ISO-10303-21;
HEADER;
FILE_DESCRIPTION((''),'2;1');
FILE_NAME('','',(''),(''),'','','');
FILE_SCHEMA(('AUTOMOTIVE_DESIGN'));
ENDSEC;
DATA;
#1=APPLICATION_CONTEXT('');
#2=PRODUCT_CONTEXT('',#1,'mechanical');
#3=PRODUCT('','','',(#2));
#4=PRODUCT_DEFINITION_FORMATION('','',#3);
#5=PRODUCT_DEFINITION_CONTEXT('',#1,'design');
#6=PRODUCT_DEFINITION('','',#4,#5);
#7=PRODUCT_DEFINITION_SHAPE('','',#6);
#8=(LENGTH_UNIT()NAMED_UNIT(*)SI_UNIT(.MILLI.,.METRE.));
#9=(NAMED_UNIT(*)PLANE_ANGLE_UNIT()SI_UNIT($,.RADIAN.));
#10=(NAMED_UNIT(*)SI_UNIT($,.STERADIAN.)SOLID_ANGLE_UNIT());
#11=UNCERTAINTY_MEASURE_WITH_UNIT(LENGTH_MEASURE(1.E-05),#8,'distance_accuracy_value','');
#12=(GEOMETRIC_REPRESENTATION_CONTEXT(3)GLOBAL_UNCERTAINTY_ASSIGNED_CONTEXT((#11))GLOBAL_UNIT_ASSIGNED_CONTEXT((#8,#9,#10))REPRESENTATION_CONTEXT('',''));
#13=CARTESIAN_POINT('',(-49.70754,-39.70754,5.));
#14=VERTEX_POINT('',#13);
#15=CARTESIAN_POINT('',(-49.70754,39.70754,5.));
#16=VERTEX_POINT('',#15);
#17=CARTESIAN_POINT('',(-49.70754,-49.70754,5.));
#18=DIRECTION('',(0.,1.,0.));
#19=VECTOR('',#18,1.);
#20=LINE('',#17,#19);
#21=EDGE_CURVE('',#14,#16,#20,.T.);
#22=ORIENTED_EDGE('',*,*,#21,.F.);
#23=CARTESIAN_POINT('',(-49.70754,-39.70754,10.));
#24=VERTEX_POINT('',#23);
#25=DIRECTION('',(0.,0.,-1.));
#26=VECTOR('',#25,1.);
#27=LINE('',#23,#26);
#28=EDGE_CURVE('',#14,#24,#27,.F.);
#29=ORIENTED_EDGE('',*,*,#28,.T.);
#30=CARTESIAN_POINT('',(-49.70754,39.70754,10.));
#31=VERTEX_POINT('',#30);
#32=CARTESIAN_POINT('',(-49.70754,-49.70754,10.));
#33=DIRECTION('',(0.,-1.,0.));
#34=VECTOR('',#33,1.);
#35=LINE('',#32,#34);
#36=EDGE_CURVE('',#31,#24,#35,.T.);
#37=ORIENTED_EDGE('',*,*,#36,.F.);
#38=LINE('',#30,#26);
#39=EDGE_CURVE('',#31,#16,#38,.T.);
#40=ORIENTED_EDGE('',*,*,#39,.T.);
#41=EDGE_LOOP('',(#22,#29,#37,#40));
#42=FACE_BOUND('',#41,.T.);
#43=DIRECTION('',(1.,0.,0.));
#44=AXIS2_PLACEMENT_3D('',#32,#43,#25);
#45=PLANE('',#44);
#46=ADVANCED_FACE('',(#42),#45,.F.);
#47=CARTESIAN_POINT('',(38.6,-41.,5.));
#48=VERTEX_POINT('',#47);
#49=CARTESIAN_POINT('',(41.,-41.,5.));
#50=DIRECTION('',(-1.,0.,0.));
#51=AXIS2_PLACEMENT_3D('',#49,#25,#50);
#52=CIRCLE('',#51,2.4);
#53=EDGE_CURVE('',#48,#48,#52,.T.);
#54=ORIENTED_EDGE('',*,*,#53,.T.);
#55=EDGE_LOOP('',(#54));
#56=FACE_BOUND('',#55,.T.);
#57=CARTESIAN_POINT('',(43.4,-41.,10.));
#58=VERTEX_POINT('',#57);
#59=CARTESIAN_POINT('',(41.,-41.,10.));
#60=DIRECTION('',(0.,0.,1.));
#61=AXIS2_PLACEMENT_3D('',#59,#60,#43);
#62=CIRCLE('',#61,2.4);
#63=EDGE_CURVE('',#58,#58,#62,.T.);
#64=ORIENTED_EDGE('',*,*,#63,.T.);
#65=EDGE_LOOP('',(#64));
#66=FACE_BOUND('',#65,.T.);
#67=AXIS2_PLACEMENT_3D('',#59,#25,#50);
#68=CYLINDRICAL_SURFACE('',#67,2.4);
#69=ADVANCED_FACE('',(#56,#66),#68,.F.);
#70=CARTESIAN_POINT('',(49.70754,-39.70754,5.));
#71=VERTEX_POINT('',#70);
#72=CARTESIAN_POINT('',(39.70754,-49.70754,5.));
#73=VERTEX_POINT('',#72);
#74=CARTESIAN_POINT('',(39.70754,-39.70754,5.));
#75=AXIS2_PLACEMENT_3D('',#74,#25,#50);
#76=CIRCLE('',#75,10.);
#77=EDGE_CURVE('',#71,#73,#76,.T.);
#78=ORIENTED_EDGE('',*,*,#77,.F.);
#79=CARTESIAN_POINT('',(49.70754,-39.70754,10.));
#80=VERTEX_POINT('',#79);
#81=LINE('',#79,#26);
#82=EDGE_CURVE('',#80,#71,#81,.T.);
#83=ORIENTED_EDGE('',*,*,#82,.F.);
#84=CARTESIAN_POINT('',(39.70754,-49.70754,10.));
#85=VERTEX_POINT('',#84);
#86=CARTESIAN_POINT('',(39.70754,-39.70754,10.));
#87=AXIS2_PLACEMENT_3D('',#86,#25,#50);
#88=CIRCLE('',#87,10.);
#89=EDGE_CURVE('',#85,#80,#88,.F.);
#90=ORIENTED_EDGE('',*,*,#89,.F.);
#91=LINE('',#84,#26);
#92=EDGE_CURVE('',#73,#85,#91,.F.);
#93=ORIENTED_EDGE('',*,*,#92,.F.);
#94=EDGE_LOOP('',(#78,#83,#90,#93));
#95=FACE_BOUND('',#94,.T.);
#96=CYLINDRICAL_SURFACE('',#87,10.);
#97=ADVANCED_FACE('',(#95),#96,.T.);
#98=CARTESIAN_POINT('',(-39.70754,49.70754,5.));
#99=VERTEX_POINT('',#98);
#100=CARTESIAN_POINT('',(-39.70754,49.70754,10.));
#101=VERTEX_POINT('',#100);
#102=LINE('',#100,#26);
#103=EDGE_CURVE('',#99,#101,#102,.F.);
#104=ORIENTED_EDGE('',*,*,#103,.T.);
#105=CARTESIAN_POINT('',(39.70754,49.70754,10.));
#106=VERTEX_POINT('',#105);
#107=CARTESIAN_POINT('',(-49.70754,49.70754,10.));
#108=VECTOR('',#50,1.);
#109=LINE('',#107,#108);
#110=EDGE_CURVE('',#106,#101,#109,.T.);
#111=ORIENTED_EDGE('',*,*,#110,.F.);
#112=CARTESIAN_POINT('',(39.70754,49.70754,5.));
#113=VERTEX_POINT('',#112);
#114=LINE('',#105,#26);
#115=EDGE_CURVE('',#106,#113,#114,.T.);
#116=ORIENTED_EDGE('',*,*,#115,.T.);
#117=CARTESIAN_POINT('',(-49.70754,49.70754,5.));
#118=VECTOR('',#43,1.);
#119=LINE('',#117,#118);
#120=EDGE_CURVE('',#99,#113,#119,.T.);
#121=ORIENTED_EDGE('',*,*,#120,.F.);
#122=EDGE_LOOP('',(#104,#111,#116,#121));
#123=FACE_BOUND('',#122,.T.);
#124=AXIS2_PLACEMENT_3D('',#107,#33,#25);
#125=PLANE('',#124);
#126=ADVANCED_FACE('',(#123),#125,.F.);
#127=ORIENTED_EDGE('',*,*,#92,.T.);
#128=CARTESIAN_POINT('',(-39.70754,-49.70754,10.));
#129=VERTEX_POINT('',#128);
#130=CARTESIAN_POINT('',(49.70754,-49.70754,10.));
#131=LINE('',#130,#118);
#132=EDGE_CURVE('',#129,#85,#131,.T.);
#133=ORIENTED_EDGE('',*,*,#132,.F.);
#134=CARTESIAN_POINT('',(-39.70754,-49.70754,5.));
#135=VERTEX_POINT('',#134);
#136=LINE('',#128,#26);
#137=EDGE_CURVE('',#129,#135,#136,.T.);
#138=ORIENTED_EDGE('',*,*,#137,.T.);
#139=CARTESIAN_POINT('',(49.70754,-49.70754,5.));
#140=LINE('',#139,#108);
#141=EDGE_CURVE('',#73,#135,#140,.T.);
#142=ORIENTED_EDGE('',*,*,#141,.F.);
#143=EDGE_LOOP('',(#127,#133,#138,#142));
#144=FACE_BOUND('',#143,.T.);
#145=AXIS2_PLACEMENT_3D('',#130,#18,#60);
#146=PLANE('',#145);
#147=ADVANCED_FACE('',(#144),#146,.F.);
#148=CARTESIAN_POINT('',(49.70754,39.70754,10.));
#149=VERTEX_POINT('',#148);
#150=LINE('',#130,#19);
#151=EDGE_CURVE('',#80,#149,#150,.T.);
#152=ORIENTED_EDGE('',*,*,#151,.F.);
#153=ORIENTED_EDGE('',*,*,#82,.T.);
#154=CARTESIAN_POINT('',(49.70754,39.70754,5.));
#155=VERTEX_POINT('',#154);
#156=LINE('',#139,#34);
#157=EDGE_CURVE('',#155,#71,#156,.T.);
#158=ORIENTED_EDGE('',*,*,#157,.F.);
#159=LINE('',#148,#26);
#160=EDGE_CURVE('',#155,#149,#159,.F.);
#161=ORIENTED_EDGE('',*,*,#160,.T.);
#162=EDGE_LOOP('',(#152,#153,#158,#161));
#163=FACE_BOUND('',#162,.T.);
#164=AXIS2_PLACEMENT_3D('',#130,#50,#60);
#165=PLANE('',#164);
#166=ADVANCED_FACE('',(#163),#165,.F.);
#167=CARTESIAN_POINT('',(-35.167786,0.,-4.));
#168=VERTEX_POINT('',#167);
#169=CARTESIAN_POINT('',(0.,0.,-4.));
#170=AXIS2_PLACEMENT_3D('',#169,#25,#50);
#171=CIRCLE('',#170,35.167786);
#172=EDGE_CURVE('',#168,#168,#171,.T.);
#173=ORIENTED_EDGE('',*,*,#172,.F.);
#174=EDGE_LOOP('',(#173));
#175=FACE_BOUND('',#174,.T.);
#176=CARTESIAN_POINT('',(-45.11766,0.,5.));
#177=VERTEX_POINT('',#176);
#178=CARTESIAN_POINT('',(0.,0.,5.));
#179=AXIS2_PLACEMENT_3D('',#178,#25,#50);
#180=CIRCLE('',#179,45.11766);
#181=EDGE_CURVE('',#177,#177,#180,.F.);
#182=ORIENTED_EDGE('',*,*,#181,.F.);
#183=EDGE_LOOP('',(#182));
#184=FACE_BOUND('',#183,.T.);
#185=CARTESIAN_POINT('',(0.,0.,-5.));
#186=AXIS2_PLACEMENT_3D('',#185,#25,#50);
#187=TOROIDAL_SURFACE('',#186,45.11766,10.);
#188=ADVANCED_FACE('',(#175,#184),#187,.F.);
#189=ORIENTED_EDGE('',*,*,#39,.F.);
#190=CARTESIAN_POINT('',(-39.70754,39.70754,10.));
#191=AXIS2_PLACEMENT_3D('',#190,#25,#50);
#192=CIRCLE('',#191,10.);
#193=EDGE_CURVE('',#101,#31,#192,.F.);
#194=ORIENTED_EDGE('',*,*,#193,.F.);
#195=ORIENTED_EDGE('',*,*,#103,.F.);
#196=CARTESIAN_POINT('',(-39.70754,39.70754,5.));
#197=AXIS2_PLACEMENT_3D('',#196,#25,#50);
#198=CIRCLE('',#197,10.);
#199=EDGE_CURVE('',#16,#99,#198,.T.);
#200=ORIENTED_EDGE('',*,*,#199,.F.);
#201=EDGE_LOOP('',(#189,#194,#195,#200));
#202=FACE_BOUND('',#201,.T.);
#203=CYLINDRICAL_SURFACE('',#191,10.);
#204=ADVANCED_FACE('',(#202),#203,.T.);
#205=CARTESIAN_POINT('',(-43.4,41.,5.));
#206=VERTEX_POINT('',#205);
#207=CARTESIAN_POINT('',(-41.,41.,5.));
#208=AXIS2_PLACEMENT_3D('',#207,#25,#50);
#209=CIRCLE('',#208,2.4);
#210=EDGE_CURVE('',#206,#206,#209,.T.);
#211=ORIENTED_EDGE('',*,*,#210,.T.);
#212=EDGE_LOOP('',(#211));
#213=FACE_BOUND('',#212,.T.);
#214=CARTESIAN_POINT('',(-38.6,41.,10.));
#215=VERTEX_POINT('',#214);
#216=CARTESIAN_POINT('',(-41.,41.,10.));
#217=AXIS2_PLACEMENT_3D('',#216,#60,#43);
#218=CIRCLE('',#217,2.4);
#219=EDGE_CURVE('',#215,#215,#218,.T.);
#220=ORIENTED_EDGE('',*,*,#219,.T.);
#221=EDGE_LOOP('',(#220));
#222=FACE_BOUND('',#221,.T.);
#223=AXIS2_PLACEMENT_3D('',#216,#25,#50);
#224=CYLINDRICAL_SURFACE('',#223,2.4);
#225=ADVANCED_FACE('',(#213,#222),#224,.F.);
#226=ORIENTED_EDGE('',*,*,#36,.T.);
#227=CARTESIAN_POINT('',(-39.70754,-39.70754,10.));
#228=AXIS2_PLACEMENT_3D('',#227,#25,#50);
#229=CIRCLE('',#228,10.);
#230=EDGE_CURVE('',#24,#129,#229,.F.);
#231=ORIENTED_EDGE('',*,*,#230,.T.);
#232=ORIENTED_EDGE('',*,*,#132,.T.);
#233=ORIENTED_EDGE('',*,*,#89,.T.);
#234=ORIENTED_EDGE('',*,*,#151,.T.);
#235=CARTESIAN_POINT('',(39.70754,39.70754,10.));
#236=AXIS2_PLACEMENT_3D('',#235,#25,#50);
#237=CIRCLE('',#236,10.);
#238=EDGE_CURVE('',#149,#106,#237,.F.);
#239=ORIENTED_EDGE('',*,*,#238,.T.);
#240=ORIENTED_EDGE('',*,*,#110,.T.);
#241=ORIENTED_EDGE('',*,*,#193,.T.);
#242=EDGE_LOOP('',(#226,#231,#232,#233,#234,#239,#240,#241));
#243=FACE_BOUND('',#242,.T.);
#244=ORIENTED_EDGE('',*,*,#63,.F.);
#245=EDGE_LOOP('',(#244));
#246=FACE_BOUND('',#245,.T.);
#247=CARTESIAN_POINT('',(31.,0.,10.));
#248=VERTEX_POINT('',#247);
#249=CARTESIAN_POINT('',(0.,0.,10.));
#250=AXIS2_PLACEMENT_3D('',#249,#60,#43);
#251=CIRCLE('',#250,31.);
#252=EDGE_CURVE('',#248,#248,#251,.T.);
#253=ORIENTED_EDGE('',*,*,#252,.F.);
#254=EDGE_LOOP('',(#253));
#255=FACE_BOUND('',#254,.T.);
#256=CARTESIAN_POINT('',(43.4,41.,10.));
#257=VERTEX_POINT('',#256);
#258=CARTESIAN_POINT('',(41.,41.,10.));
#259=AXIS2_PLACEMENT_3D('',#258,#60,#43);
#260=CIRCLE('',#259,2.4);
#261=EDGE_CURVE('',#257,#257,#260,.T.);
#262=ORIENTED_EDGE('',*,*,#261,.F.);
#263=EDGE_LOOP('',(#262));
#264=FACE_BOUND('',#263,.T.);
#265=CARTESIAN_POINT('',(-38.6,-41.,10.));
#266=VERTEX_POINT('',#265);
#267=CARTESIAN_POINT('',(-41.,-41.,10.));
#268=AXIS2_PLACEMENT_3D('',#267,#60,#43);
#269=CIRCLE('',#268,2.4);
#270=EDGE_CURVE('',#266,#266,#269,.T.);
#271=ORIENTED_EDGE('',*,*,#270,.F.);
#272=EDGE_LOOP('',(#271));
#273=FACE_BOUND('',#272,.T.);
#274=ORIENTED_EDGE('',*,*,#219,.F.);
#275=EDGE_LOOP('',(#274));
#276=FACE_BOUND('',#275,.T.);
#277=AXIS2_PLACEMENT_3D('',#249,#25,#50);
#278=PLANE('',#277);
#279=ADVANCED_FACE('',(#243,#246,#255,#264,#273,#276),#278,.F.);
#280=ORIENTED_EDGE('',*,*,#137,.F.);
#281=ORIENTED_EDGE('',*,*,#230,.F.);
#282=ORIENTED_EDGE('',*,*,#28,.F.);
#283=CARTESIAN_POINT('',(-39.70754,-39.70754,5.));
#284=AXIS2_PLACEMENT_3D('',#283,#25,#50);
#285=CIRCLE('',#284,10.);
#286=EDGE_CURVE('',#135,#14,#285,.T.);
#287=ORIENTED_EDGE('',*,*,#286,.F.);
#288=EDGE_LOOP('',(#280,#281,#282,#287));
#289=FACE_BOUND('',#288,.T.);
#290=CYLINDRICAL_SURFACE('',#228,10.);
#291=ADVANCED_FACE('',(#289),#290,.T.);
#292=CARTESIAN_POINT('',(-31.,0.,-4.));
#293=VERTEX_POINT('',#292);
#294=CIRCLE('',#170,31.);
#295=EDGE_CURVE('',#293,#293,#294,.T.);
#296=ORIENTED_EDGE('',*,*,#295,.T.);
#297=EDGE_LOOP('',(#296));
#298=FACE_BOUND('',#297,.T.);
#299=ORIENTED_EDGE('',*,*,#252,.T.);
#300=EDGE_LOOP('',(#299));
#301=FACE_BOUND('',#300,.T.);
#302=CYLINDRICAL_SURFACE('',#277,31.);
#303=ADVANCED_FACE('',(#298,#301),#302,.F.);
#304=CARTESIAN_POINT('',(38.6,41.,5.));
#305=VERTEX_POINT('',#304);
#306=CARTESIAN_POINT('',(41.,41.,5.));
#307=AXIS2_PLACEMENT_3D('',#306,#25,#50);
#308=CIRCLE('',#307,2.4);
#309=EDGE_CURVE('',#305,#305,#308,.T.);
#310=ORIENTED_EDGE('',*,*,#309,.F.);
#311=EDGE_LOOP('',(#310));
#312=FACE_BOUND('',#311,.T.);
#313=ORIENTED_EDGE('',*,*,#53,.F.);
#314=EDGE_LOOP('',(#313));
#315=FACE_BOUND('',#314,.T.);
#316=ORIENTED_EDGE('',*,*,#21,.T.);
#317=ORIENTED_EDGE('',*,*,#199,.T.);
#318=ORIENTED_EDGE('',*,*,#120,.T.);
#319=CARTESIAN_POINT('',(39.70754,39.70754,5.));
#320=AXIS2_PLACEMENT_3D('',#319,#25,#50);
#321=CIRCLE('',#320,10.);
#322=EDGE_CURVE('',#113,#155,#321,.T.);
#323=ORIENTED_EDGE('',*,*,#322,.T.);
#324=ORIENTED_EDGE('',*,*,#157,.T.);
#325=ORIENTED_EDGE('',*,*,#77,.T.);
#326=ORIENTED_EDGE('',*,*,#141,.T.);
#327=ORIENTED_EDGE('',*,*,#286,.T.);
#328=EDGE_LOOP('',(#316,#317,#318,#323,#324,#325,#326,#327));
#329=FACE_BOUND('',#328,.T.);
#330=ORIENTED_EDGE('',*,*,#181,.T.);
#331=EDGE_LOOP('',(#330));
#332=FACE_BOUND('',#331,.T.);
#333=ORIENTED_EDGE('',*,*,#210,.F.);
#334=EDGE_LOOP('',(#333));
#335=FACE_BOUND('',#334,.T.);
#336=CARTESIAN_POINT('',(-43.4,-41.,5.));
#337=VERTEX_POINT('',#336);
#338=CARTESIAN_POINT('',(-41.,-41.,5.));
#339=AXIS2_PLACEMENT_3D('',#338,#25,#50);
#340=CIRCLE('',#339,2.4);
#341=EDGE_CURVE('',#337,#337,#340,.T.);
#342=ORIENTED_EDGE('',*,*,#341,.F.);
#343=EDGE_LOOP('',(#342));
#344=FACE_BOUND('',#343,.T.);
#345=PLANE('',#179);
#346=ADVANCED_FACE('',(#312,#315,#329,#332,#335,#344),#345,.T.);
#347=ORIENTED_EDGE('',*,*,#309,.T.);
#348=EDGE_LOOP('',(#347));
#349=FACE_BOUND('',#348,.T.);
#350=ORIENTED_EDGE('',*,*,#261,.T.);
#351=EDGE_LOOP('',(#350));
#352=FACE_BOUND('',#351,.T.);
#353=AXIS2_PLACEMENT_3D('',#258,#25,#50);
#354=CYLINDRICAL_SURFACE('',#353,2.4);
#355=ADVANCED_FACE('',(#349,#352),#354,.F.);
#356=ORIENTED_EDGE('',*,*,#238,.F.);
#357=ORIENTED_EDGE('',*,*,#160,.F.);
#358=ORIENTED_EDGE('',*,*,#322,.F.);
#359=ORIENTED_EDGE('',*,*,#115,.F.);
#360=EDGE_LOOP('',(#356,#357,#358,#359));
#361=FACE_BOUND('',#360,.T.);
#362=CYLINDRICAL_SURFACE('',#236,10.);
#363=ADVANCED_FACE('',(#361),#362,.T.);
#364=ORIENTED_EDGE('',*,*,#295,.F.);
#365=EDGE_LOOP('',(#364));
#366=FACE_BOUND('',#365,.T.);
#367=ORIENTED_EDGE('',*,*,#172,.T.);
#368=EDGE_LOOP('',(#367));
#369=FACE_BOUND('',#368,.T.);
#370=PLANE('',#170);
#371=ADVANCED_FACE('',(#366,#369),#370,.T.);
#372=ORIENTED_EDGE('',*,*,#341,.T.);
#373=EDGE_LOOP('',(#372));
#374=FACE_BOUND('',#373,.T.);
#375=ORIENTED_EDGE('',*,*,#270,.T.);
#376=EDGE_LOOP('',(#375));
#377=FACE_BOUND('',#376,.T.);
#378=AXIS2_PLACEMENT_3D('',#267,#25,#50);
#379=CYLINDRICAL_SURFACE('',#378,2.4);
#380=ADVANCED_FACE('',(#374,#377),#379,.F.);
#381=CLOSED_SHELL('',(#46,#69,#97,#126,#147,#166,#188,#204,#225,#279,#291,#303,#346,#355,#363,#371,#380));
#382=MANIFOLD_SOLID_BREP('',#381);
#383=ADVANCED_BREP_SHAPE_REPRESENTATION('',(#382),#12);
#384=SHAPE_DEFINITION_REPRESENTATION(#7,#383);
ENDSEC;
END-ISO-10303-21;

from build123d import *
from build123d.topology import SkipClean

# Parameters (mm, degrees)
SKETCH2_W           = 99.415080592
SKETCH2_H           = 99.415080592
SKETCH2_R           = 2.4
SKETCH2_R_2         = 31
BOSS_EXTRUDE1_DEPTH = 10
SKETCH4_R           = 81.568467367
CUT_EXTRUDE1_DEPTH  = 5
FILLET1_R           = 10
BOSS_EXTRUDE3_START = 9
SKETCH5_R           = 35.16778574
SKETCH5_R_2         = 31
BOSS_EXTRUDE3_DEPTH = 9
FILLET2_R           = 10


with BuildPart() as part:
    # Sketch2 → Boss-Extrude1 (new body)
    with BuildSketch(Plane.XY):
        Rectangle(SKETCH2_W, SKETCH2_H)
        with Locations((-41, 41)):
            Circle(SKETCH2_R, mode=Mode.SUBTRACT)
        with Locations((41, 41)):
            Circle(SKETCH2_R, mode=Mode.SUBTRACT)
        with Locations((41, -41)):
            Circle(SKETCH2_R, mode=Mode.SUBTRACT)
        with Locations((-41, -41)):
            Circle(SKETCH2_R, mode=Mode.SUBTRACT)
        Circle(SKETCH2_R_2, mode=Mode.SUBTRACT)
    extrude(amount=BOSS_EXTRUDE1_DEPTH)

    # Sketch4 → Cut-Extrude1 (cut)
    with BuildSketch(Plane(origin=(0, 0, 0), x_dir=(-1, 0, 0), z_dir=(0, 0, -1))):
        Circle(SKETCH4_R)
    extrude(amount=-CUT_EXTRUDE1_DEPTH, mode=Mode.SUBTRACT)

    # Fillet1
    fillet1_edges = [part.edges().sort_by_distance(p)[0] for p in [
        (-49.707540296, 49.707540296, 7.5),
        (49.707540296, 49.707540296, 7.5),
        (49.707540296, -49.707540296, 7.5),
        (-49.707540296, -49.707540296, 7.5),
    ]]
    fillet(fillet1_edges, radius=FILLET1_R)

    # Sketch5 → Boss-Extrude3 (add)
    with SkipClean():  # the faces are left unmerged after this step: merging them gives an invalid solid
        with BuildSketch(Plane(origin=(0, 0, 5), x_dir=(-1, 0, 0), z_dir=(0, 0, -1)).offset(BOSS_EXTRUDE3_START)):
            Circle(SKETCH5_R)
            Circle(SKETCH5_R_2, mode=Mode.SUBTRACT)
        extrude(amount=-BOSS_EXTRUDE3_DEPTH)

    # Fillet2
    # the kernel refuses this fillet: 10 mm, written as the material it adds along each edge
    with BuildSketch(Plane(origin=(0, 0, 5), x_dir=(-1, 0, 0), z_dir=(0, -1, 0))) as fillet2_piece_1:
        with BuildLine():
            CenterArc((45.117660111, 10), FILLET2_R, 185.739170477, 84.260829523)
            Line((35.16778574, 9), (34.968788253, 8.98))
            ThreePointArc((34.968788253, 8.98), (34.96778574, 4.5), (34.96778574, 0))
            Line((34.96778574, 0), (35.16778574, -0.2))
            Line((35.16778574, -0.2), (45.117660111, -0.2))
            Line((45.117660111, -0.2), (45.117660111, 0))
        make_face()
    revolve(axis=Axis((0, 0, 5), (0, 0, -1)))


solid = part.part
